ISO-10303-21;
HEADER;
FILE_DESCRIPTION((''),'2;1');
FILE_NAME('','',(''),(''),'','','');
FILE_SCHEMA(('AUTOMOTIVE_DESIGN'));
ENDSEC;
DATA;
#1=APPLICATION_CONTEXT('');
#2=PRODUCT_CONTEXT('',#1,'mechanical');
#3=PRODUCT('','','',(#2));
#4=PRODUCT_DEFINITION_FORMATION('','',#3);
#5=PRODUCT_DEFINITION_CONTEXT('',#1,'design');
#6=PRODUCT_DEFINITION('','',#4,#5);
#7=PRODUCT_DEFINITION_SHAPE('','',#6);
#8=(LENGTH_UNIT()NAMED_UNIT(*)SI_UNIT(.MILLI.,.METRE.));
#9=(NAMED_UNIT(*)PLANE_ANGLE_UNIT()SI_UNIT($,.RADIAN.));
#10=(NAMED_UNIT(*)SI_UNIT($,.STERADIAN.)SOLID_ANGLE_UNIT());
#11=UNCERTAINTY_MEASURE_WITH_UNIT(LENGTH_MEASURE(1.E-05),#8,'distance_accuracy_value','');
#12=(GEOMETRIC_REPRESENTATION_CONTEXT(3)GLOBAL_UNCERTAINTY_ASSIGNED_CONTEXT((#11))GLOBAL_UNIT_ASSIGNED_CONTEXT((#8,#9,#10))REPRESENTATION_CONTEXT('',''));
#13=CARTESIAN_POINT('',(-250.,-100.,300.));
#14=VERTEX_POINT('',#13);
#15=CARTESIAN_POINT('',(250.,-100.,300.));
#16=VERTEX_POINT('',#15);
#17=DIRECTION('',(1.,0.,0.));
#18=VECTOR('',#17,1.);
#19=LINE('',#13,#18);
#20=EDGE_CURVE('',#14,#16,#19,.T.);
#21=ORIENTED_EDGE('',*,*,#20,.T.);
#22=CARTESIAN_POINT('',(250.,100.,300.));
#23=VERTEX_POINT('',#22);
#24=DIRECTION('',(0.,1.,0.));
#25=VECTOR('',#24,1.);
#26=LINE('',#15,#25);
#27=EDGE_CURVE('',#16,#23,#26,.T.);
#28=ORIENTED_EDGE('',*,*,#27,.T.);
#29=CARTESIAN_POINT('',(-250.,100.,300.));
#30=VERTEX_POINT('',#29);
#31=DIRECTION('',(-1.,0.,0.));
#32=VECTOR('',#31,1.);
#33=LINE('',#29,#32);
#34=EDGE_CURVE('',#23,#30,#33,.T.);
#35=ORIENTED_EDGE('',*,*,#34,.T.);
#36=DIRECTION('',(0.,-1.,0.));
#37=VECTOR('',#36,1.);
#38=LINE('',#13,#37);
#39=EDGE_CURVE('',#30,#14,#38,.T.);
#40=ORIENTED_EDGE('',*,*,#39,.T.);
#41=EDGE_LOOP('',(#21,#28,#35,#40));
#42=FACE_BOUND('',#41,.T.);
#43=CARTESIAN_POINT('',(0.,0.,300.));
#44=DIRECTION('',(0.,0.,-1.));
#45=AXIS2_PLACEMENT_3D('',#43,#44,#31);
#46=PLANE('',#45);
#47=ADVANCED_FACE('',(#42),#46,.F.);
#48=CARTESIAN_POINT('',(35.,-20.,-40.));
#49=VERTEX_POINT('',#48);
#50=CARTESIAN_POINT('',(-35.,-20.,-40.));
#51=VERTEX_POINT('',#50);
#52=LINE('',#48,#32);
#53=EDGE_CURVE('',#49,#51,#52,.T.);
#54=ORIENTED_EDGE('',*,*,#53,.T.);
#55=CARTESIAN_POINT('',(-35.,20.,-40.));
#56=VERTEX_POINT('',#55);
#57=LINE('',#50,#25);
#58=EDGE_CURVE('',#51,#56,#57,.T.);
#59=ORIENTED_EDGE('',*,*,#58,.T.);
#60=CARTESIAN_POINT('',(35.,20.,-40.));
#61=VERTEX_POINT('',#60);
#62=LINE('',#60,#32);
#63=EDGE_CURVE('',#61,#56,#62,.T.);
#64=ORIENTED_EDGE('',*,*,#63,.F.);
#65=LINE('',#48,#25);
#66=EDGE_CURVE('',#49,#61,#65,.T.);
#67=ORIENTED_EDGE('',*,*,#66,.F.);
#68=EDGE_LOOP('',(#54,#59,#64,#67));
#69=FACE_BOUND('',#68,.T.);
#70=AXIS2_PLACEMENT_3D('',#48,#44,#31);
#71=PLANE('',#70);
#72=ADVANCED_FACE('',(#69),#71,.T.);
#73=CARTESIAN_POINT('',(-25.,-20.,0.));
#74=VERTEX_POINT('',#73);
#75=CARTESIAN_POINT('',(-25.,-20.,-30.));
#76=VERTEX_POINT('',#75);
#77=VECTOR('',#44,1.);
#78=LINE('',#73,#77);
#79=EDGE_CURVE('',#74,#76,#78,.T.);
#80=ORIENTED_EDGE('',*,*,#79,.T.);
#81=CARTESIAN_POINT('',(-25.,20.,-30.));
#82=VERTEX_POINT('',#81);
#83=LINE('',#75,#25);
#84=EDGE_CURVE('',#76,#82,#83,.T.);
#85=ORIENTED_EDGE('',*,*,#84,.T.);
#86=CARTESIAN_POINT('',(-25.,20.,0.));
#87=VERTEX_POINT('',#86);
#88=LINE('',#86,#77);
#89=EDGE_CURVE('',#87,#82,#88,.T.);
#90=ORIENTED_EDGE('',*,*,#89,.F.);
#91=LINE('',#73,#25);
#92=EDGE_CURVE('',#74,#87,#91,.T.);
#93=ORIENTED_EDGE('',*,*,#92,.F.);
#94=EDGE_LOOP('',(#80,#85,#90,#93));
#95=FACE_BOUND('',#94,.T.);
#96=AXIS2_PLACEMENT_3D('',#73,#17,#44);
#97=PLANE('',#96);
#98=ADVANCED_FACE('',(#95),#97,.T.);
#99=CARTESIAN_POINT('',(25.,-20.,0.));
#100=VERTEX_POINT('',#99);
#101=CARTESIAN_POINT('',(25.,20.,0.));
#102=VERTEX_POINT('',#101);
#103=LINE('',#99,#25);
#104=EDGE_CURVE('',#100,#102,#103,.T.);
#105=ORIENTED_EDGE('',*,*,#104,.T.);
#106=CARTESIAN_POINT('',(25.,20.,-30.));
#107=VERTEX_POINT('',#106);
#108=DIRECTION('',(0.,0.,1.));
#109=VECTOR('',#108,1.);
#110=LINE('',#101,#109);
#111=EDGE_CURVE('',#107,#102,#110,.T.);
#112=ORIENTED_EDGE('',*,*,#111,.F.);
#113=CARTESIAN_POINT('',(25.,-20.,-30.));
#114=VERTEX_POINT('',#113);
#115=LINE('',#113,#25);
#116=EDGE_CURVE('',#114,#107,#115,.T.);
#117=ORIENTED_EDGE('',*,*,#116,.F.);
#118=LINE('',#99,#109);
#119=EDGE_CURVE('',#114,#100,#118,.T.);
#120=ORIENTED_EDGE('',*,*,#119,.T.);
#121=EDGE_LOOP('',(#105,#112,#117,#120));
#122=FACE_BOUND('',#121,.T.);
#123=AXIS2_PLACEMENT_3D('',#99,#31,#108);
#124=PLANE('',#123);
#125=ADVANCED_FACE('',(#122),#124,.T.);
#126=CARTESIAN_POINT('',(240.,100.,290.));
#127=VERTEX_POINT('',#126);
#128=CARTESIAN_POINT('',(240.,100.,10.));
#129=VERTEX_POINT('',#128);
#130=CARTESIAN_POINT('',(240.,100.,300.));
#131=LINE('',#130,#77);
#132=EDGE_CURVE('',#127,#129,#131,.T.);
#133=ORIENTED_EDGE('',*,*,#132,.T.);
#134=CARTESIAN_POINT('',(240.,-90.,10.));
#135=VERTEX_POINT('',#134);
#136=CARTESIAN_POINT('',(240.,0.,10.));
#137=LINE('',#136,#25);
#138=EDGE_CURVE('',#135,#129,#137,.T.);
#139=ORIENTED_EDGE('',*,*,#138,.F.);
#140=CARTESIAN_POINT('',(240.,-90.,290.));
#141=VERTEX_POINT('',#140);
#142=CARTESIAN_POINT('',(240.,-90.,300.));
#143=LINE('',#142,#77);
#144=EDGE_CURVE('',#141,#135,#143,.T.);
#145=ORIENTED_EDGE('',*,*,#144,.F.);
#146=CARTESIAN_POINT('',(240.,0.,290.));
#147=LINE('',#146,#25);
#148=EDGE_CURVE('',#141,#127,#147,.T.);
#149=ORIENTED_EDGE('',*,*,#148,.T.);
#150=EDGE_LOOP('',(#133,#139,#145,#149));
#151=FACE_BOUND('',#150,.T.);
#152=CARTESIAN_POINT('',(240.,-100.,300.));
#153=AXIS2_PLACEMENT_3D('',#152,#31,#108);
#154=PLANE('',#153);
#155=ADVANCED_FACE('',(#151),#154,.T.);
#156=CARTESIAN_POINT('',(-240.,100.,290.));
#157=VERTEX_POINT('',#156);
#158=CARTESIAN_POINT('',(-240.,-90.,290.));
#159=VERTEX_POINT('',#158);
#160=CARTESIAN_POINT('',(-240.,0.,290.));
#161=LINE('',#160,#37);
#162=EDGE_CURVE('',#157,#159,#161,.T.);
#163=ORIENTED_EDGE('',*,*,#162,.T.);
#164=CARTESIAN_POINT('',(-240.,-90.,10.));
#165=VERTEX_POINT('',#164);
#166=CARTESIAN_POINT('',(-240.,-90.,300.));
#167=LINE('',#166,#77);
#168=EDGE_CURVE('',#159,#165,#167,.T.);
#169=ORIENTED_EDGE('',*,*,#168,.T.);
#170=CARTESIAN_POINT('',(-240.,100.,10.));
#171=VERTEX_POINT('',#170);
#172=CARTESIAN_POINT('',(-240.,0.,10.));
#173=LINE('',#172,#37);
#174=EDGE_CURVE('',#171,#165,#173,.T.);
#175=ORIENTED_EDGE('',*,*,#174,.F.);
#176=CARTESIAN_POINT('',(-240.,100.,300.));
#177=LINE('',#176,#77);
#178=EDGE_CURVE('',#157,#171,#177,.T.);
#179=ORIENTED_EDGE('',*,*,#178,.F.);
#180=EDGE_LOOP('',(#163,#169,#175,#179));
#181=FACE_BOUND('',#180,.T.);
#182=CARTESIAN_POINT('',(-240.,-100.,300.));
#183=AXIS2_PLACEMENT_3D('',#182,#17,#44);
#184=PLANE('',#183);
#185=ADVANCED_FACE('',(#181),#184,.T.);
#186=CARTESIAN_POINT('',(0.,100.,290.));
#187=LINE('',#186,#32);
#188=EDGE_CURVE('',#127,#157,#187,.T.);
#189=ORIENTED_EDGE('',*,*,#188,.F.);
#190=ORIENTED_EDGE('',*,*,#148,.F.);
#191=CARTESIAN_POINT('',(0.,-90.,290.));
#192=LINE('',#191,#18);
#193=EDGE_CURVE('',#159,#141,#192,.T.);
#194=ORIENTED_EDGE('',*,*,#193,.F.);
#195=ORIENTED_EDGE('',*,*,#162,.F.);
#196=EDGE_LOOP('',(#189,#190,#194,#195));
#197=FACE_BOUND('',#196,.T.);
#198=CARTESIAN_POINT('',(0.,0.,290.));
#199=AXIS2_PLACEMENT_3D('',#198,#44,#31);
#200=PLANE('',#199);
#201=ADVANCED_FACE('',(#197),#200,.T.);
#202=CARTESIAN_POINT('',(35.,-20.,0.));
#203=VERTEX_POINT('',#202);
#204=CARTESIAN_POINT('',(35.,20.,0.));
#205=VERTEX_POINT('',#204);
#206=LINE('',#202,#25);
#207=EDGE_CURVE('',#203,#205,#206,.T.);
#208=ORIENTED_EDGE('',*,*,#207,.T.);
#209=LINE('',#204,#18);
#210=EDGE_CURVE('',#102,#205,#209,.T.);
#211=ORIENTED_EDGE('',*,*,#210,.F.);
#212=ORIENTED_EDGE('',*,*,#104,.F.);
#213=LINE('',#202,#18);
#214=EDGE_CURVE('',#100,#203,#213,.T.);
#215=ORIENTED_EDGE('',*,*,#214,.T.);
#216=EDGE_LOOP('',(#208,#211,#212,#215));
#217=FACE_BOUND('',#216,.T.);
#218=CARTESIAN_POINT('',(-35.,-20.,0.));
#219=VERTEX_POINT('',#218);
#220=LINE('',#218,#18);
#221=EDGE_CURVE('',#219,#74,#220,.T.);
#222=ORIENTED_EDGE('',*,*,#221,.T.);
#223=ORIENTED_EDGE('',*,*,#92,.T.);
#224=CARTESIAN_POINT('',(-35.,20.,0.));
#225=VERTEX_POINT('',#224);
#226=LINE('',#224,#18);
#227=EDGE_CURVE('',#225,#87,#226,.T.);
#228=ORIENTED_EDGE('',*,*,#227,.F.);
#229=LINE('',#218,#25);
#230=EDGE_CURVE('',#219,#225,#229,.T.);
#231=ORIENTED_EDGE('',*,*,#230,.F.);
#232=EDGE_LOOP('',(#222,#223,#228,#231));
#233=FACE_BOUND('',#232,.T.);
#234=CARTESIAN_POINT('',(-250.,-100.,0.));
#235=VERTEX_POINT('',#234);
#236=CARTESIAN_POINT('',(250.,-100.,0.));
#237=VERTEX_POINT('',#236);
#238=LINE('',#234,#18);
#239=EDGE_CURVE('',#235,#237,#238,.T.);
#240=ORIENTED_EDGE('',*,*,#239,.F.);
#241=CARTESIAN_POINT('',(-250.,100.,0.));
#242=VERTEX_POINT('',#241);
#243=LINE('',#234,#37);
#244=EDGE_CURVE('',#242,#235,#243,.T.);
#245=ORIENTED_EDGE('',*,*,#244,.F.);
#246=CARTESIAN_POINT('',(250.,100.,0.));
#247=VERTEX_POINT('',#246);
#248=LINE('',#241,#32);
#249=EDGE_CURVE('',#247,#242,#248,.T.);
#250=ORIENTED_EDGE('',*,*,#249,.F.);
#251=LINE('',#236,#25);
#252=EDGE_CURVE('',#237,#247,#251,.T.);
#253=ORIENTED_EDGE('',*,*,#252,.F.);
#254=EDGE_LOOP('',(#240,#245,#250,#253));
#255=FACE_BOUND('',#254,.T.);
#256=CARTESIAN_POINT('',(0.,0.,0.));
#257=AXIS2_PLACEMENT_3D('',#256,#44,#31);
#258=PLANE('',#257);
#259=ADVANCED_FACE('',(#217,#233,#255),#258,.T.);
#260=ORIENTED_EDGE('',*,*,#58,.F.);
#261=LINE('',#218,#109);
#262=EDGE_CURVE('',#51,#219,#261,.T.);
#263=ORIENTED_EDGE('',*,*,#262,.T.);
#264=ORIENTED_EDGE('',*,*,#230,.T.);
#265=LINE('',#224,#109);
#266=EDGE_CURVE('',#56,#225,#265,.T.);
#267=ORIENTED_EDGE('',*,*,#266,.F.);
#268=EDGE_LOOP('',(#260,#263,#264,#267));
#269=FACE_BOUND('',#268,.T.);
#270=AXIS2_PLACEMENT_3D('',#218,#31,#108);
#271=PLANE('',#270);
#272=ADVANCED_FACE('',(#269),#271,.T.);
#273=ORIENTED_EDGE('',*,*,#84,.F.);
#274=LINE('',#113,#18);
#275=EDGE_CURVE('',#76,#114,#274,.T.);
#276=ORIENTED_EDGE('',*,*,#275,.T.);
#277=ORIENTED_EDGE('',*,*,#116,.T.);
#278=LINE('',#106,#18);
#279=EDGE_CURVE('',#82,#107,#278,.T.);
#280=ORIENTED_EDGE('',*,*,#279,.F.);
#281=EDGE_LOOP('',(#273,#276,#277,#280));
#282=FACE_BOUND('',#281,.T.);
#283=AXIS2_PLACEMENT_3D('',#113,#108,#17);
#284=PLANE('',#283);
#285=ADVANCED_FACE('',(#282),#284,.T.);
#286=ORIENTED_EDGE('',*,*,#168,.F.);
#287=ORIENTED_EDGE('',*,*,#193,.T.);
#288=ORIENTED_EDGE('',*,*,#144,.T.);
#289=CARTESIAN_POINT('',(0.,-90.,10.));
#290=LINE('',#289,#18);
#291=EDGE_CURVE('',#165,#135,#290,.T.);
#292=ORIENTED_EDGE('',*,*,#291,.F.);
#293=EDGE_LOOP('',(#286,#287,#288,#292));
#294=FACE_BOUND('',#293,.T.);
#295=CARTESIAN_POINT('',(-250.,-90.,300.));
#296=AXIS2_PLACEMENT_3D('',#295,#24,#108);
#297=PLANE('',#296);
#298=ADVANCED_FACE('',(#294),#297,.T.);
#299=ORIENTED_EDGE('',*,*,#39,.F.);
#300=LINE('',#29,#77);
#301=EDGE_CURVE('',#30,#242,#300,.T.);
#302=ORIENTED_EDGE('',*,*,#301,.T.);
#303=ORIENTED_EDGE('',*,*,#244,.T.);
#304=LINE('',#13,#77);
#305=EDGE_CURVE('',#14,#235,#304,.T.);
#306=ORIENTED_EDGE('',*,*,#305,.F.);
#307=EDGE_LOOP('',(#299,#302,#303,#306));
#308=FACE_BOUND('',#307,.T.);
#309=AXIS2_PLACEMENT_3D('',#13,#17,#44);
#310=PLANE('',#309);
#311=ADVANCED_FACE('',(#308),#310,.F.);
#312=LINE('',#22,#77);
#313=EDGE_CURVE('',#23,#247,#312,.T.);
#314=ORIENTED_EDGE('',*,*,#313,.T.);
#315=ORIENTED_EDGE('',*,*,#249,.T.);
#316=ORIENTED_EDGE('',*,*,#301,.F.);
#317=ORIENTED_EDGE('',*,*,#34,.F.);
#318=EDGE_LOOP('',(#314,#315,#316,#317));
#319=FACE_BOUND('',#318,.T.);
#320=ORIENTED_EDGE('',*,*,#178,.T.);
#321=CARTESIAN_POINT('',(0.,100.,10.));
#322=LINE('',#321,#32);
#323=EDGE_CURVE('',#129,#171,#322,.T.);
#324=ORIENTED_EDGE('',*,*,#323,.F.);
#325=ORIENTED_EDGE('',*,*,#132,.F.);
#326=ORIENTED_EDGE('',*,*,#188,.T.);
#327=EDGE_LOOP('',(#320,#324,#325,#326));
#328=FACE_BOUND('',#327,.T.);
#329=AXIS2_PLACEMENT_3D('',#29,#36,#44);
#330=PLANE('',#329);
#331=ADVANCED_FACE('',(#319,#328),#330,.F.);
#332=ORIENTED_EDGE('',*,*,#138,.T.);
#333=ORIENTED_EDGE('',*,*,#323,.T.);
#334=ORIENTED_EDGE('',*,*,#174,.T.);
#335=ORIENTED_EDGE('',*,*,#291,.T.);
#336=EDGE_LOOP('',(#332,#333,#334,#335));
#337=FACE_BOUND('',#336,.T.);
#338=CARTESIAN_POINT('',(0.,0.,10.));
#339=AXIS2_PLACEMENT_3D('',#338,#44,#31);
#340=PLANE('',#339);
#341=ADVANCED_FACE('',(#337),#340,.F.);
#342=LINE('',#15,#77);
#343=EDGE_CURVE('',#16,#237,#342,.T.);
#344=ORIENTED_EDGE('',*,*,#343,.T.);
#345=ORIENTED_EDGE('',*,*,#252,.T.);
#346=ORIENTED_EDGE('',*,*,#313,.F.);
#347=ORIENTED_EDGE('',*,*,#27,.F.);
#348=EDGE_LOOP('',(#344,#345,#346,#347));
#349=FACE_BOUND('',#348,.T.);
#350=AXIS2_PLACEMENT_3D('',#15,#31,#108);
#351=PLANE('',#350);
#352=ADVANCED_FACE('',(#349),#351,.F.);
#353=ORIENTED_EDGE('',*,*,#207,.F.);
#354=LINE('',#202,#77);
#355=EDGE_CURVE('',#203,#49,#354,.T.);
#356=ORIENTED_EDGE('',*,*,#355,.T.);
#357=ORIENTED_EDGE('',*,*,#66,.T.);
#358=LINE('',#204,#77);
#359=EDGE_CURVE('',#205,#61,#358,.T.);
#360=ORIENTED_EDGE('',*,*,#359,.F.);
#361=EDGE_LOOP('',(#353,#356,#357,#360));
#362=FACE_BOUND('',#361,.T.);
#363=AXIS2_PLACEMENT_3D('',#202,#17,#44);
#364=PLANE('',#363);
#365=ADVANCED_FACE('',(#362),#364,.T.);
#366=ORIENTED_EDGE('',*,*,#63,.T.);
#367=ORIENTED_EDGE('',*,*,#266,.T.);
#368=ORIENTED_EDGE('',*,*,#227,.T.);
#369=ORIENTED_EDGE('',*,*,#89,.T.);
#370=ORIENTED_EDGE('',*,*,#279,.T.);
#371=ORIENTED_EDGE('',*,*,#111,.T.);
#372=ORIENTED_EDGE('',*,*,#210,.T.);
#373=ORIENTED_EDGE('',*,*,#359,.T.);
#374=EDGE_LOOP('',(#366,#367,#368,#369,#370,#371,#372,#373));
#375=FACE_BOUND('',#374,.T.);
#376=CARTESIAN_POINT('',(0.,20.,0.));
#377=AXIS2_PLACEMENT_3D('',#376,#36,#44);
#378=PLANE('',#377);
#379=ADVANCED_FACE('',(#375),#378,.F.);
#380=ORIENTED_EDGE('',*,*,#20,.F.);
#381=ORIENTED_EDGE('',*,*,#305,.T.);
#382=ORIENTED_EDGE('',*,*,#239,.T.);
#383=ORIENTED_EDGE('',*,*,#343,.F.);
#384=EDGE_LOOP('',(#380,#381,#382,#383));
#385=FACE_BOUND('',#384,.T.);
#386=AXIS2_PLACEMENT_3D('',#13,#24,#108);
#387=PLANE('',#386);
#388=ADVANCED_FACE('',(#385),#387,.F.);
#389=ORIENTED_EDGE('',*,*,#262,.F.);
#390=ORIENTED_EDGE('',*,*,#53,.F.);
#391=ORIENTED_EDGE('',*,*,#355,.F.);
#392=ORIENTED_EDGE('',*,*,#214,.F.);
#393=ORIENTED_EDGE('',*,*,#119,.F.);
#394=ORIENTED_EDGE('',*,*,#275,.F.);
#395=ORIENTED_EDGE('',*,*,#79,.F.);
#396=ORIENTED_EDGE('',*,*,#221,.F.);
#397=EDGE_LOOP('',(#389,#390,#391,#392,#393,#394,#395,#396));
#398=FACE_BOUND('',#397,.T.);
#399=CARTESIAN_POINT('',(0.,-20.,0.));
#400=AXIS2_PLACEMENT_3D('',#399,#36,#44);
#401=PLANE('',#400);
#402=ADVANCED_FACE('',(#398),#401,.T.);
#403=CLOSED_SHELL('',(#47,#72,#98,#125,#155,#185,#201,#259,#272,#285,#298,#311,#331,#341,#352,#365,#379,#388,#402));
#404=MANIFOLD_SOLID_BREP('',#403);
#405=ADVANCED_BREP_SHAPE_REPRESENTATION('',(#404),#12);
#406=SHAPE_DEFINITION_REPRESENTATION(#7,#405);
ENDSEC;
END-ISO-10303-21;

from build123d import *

# Parameters (mm, degrees)
SKETCH1_W                = 500
SKETCH1_H                = 200
BOSS_EXTRUDE1_DEPTH      = 300
BOSS_EXTRUDE2_DEPTH      = 20
BOSS_EXTRUDE2_DEPTH_BACK = 20
SHELL1_START             = -240
SHELL1_OUTLINE_W         = 190
SHELL1_OUTLINE_H         = 280
SHELL1_DEPTH             = 480


# Read off the part's stored shape, not the designer's step: Shell1
with BuildPart() as part:
    # Sketch1 → Boss-Extrude1 (new body)
    with BuildSketch(Plane.XY):
        Rectangle(SKETCH1_W, SKETCH1_H)
    extrude(amount=BOSS_EXTRUDE1_DEPTH)

    # Sketch2 → Boss-Extrude2 (add, two sides: drawn at the far end of the back side and taken through both)
    with BuildSketch(Plane(origin=(0, 0, 0), x_dir=(1, 0, 0), z_dir=(0, 1, 0)).offset(-BOSS_EXTRUDE2_DEPTH_BACK)):
        Polygon((25, 0), (25, 30), (-25, 30), (-25, 0), (-35, 0), (-35, 40), (35, 40), (35, 0), align=None)
    extrude(amount=BOSS_EXTRUDE2_DEPTH + BOSS_EXTRUDE2_DEPTH_BACK)

    # Shell1 outline → Shell1 (cut)
    with BuildSketch(Plane.YZ.offset(SHELL1_START)):
        with Locations((5, 150)):
            Rectangle(SHELL1_OUTLINE_W, SHELL1_OUTLINE_H)
    extrude(amount=SHELL1_DEPTH, mode=Mode.SUBTRACT)


solid = part.part
